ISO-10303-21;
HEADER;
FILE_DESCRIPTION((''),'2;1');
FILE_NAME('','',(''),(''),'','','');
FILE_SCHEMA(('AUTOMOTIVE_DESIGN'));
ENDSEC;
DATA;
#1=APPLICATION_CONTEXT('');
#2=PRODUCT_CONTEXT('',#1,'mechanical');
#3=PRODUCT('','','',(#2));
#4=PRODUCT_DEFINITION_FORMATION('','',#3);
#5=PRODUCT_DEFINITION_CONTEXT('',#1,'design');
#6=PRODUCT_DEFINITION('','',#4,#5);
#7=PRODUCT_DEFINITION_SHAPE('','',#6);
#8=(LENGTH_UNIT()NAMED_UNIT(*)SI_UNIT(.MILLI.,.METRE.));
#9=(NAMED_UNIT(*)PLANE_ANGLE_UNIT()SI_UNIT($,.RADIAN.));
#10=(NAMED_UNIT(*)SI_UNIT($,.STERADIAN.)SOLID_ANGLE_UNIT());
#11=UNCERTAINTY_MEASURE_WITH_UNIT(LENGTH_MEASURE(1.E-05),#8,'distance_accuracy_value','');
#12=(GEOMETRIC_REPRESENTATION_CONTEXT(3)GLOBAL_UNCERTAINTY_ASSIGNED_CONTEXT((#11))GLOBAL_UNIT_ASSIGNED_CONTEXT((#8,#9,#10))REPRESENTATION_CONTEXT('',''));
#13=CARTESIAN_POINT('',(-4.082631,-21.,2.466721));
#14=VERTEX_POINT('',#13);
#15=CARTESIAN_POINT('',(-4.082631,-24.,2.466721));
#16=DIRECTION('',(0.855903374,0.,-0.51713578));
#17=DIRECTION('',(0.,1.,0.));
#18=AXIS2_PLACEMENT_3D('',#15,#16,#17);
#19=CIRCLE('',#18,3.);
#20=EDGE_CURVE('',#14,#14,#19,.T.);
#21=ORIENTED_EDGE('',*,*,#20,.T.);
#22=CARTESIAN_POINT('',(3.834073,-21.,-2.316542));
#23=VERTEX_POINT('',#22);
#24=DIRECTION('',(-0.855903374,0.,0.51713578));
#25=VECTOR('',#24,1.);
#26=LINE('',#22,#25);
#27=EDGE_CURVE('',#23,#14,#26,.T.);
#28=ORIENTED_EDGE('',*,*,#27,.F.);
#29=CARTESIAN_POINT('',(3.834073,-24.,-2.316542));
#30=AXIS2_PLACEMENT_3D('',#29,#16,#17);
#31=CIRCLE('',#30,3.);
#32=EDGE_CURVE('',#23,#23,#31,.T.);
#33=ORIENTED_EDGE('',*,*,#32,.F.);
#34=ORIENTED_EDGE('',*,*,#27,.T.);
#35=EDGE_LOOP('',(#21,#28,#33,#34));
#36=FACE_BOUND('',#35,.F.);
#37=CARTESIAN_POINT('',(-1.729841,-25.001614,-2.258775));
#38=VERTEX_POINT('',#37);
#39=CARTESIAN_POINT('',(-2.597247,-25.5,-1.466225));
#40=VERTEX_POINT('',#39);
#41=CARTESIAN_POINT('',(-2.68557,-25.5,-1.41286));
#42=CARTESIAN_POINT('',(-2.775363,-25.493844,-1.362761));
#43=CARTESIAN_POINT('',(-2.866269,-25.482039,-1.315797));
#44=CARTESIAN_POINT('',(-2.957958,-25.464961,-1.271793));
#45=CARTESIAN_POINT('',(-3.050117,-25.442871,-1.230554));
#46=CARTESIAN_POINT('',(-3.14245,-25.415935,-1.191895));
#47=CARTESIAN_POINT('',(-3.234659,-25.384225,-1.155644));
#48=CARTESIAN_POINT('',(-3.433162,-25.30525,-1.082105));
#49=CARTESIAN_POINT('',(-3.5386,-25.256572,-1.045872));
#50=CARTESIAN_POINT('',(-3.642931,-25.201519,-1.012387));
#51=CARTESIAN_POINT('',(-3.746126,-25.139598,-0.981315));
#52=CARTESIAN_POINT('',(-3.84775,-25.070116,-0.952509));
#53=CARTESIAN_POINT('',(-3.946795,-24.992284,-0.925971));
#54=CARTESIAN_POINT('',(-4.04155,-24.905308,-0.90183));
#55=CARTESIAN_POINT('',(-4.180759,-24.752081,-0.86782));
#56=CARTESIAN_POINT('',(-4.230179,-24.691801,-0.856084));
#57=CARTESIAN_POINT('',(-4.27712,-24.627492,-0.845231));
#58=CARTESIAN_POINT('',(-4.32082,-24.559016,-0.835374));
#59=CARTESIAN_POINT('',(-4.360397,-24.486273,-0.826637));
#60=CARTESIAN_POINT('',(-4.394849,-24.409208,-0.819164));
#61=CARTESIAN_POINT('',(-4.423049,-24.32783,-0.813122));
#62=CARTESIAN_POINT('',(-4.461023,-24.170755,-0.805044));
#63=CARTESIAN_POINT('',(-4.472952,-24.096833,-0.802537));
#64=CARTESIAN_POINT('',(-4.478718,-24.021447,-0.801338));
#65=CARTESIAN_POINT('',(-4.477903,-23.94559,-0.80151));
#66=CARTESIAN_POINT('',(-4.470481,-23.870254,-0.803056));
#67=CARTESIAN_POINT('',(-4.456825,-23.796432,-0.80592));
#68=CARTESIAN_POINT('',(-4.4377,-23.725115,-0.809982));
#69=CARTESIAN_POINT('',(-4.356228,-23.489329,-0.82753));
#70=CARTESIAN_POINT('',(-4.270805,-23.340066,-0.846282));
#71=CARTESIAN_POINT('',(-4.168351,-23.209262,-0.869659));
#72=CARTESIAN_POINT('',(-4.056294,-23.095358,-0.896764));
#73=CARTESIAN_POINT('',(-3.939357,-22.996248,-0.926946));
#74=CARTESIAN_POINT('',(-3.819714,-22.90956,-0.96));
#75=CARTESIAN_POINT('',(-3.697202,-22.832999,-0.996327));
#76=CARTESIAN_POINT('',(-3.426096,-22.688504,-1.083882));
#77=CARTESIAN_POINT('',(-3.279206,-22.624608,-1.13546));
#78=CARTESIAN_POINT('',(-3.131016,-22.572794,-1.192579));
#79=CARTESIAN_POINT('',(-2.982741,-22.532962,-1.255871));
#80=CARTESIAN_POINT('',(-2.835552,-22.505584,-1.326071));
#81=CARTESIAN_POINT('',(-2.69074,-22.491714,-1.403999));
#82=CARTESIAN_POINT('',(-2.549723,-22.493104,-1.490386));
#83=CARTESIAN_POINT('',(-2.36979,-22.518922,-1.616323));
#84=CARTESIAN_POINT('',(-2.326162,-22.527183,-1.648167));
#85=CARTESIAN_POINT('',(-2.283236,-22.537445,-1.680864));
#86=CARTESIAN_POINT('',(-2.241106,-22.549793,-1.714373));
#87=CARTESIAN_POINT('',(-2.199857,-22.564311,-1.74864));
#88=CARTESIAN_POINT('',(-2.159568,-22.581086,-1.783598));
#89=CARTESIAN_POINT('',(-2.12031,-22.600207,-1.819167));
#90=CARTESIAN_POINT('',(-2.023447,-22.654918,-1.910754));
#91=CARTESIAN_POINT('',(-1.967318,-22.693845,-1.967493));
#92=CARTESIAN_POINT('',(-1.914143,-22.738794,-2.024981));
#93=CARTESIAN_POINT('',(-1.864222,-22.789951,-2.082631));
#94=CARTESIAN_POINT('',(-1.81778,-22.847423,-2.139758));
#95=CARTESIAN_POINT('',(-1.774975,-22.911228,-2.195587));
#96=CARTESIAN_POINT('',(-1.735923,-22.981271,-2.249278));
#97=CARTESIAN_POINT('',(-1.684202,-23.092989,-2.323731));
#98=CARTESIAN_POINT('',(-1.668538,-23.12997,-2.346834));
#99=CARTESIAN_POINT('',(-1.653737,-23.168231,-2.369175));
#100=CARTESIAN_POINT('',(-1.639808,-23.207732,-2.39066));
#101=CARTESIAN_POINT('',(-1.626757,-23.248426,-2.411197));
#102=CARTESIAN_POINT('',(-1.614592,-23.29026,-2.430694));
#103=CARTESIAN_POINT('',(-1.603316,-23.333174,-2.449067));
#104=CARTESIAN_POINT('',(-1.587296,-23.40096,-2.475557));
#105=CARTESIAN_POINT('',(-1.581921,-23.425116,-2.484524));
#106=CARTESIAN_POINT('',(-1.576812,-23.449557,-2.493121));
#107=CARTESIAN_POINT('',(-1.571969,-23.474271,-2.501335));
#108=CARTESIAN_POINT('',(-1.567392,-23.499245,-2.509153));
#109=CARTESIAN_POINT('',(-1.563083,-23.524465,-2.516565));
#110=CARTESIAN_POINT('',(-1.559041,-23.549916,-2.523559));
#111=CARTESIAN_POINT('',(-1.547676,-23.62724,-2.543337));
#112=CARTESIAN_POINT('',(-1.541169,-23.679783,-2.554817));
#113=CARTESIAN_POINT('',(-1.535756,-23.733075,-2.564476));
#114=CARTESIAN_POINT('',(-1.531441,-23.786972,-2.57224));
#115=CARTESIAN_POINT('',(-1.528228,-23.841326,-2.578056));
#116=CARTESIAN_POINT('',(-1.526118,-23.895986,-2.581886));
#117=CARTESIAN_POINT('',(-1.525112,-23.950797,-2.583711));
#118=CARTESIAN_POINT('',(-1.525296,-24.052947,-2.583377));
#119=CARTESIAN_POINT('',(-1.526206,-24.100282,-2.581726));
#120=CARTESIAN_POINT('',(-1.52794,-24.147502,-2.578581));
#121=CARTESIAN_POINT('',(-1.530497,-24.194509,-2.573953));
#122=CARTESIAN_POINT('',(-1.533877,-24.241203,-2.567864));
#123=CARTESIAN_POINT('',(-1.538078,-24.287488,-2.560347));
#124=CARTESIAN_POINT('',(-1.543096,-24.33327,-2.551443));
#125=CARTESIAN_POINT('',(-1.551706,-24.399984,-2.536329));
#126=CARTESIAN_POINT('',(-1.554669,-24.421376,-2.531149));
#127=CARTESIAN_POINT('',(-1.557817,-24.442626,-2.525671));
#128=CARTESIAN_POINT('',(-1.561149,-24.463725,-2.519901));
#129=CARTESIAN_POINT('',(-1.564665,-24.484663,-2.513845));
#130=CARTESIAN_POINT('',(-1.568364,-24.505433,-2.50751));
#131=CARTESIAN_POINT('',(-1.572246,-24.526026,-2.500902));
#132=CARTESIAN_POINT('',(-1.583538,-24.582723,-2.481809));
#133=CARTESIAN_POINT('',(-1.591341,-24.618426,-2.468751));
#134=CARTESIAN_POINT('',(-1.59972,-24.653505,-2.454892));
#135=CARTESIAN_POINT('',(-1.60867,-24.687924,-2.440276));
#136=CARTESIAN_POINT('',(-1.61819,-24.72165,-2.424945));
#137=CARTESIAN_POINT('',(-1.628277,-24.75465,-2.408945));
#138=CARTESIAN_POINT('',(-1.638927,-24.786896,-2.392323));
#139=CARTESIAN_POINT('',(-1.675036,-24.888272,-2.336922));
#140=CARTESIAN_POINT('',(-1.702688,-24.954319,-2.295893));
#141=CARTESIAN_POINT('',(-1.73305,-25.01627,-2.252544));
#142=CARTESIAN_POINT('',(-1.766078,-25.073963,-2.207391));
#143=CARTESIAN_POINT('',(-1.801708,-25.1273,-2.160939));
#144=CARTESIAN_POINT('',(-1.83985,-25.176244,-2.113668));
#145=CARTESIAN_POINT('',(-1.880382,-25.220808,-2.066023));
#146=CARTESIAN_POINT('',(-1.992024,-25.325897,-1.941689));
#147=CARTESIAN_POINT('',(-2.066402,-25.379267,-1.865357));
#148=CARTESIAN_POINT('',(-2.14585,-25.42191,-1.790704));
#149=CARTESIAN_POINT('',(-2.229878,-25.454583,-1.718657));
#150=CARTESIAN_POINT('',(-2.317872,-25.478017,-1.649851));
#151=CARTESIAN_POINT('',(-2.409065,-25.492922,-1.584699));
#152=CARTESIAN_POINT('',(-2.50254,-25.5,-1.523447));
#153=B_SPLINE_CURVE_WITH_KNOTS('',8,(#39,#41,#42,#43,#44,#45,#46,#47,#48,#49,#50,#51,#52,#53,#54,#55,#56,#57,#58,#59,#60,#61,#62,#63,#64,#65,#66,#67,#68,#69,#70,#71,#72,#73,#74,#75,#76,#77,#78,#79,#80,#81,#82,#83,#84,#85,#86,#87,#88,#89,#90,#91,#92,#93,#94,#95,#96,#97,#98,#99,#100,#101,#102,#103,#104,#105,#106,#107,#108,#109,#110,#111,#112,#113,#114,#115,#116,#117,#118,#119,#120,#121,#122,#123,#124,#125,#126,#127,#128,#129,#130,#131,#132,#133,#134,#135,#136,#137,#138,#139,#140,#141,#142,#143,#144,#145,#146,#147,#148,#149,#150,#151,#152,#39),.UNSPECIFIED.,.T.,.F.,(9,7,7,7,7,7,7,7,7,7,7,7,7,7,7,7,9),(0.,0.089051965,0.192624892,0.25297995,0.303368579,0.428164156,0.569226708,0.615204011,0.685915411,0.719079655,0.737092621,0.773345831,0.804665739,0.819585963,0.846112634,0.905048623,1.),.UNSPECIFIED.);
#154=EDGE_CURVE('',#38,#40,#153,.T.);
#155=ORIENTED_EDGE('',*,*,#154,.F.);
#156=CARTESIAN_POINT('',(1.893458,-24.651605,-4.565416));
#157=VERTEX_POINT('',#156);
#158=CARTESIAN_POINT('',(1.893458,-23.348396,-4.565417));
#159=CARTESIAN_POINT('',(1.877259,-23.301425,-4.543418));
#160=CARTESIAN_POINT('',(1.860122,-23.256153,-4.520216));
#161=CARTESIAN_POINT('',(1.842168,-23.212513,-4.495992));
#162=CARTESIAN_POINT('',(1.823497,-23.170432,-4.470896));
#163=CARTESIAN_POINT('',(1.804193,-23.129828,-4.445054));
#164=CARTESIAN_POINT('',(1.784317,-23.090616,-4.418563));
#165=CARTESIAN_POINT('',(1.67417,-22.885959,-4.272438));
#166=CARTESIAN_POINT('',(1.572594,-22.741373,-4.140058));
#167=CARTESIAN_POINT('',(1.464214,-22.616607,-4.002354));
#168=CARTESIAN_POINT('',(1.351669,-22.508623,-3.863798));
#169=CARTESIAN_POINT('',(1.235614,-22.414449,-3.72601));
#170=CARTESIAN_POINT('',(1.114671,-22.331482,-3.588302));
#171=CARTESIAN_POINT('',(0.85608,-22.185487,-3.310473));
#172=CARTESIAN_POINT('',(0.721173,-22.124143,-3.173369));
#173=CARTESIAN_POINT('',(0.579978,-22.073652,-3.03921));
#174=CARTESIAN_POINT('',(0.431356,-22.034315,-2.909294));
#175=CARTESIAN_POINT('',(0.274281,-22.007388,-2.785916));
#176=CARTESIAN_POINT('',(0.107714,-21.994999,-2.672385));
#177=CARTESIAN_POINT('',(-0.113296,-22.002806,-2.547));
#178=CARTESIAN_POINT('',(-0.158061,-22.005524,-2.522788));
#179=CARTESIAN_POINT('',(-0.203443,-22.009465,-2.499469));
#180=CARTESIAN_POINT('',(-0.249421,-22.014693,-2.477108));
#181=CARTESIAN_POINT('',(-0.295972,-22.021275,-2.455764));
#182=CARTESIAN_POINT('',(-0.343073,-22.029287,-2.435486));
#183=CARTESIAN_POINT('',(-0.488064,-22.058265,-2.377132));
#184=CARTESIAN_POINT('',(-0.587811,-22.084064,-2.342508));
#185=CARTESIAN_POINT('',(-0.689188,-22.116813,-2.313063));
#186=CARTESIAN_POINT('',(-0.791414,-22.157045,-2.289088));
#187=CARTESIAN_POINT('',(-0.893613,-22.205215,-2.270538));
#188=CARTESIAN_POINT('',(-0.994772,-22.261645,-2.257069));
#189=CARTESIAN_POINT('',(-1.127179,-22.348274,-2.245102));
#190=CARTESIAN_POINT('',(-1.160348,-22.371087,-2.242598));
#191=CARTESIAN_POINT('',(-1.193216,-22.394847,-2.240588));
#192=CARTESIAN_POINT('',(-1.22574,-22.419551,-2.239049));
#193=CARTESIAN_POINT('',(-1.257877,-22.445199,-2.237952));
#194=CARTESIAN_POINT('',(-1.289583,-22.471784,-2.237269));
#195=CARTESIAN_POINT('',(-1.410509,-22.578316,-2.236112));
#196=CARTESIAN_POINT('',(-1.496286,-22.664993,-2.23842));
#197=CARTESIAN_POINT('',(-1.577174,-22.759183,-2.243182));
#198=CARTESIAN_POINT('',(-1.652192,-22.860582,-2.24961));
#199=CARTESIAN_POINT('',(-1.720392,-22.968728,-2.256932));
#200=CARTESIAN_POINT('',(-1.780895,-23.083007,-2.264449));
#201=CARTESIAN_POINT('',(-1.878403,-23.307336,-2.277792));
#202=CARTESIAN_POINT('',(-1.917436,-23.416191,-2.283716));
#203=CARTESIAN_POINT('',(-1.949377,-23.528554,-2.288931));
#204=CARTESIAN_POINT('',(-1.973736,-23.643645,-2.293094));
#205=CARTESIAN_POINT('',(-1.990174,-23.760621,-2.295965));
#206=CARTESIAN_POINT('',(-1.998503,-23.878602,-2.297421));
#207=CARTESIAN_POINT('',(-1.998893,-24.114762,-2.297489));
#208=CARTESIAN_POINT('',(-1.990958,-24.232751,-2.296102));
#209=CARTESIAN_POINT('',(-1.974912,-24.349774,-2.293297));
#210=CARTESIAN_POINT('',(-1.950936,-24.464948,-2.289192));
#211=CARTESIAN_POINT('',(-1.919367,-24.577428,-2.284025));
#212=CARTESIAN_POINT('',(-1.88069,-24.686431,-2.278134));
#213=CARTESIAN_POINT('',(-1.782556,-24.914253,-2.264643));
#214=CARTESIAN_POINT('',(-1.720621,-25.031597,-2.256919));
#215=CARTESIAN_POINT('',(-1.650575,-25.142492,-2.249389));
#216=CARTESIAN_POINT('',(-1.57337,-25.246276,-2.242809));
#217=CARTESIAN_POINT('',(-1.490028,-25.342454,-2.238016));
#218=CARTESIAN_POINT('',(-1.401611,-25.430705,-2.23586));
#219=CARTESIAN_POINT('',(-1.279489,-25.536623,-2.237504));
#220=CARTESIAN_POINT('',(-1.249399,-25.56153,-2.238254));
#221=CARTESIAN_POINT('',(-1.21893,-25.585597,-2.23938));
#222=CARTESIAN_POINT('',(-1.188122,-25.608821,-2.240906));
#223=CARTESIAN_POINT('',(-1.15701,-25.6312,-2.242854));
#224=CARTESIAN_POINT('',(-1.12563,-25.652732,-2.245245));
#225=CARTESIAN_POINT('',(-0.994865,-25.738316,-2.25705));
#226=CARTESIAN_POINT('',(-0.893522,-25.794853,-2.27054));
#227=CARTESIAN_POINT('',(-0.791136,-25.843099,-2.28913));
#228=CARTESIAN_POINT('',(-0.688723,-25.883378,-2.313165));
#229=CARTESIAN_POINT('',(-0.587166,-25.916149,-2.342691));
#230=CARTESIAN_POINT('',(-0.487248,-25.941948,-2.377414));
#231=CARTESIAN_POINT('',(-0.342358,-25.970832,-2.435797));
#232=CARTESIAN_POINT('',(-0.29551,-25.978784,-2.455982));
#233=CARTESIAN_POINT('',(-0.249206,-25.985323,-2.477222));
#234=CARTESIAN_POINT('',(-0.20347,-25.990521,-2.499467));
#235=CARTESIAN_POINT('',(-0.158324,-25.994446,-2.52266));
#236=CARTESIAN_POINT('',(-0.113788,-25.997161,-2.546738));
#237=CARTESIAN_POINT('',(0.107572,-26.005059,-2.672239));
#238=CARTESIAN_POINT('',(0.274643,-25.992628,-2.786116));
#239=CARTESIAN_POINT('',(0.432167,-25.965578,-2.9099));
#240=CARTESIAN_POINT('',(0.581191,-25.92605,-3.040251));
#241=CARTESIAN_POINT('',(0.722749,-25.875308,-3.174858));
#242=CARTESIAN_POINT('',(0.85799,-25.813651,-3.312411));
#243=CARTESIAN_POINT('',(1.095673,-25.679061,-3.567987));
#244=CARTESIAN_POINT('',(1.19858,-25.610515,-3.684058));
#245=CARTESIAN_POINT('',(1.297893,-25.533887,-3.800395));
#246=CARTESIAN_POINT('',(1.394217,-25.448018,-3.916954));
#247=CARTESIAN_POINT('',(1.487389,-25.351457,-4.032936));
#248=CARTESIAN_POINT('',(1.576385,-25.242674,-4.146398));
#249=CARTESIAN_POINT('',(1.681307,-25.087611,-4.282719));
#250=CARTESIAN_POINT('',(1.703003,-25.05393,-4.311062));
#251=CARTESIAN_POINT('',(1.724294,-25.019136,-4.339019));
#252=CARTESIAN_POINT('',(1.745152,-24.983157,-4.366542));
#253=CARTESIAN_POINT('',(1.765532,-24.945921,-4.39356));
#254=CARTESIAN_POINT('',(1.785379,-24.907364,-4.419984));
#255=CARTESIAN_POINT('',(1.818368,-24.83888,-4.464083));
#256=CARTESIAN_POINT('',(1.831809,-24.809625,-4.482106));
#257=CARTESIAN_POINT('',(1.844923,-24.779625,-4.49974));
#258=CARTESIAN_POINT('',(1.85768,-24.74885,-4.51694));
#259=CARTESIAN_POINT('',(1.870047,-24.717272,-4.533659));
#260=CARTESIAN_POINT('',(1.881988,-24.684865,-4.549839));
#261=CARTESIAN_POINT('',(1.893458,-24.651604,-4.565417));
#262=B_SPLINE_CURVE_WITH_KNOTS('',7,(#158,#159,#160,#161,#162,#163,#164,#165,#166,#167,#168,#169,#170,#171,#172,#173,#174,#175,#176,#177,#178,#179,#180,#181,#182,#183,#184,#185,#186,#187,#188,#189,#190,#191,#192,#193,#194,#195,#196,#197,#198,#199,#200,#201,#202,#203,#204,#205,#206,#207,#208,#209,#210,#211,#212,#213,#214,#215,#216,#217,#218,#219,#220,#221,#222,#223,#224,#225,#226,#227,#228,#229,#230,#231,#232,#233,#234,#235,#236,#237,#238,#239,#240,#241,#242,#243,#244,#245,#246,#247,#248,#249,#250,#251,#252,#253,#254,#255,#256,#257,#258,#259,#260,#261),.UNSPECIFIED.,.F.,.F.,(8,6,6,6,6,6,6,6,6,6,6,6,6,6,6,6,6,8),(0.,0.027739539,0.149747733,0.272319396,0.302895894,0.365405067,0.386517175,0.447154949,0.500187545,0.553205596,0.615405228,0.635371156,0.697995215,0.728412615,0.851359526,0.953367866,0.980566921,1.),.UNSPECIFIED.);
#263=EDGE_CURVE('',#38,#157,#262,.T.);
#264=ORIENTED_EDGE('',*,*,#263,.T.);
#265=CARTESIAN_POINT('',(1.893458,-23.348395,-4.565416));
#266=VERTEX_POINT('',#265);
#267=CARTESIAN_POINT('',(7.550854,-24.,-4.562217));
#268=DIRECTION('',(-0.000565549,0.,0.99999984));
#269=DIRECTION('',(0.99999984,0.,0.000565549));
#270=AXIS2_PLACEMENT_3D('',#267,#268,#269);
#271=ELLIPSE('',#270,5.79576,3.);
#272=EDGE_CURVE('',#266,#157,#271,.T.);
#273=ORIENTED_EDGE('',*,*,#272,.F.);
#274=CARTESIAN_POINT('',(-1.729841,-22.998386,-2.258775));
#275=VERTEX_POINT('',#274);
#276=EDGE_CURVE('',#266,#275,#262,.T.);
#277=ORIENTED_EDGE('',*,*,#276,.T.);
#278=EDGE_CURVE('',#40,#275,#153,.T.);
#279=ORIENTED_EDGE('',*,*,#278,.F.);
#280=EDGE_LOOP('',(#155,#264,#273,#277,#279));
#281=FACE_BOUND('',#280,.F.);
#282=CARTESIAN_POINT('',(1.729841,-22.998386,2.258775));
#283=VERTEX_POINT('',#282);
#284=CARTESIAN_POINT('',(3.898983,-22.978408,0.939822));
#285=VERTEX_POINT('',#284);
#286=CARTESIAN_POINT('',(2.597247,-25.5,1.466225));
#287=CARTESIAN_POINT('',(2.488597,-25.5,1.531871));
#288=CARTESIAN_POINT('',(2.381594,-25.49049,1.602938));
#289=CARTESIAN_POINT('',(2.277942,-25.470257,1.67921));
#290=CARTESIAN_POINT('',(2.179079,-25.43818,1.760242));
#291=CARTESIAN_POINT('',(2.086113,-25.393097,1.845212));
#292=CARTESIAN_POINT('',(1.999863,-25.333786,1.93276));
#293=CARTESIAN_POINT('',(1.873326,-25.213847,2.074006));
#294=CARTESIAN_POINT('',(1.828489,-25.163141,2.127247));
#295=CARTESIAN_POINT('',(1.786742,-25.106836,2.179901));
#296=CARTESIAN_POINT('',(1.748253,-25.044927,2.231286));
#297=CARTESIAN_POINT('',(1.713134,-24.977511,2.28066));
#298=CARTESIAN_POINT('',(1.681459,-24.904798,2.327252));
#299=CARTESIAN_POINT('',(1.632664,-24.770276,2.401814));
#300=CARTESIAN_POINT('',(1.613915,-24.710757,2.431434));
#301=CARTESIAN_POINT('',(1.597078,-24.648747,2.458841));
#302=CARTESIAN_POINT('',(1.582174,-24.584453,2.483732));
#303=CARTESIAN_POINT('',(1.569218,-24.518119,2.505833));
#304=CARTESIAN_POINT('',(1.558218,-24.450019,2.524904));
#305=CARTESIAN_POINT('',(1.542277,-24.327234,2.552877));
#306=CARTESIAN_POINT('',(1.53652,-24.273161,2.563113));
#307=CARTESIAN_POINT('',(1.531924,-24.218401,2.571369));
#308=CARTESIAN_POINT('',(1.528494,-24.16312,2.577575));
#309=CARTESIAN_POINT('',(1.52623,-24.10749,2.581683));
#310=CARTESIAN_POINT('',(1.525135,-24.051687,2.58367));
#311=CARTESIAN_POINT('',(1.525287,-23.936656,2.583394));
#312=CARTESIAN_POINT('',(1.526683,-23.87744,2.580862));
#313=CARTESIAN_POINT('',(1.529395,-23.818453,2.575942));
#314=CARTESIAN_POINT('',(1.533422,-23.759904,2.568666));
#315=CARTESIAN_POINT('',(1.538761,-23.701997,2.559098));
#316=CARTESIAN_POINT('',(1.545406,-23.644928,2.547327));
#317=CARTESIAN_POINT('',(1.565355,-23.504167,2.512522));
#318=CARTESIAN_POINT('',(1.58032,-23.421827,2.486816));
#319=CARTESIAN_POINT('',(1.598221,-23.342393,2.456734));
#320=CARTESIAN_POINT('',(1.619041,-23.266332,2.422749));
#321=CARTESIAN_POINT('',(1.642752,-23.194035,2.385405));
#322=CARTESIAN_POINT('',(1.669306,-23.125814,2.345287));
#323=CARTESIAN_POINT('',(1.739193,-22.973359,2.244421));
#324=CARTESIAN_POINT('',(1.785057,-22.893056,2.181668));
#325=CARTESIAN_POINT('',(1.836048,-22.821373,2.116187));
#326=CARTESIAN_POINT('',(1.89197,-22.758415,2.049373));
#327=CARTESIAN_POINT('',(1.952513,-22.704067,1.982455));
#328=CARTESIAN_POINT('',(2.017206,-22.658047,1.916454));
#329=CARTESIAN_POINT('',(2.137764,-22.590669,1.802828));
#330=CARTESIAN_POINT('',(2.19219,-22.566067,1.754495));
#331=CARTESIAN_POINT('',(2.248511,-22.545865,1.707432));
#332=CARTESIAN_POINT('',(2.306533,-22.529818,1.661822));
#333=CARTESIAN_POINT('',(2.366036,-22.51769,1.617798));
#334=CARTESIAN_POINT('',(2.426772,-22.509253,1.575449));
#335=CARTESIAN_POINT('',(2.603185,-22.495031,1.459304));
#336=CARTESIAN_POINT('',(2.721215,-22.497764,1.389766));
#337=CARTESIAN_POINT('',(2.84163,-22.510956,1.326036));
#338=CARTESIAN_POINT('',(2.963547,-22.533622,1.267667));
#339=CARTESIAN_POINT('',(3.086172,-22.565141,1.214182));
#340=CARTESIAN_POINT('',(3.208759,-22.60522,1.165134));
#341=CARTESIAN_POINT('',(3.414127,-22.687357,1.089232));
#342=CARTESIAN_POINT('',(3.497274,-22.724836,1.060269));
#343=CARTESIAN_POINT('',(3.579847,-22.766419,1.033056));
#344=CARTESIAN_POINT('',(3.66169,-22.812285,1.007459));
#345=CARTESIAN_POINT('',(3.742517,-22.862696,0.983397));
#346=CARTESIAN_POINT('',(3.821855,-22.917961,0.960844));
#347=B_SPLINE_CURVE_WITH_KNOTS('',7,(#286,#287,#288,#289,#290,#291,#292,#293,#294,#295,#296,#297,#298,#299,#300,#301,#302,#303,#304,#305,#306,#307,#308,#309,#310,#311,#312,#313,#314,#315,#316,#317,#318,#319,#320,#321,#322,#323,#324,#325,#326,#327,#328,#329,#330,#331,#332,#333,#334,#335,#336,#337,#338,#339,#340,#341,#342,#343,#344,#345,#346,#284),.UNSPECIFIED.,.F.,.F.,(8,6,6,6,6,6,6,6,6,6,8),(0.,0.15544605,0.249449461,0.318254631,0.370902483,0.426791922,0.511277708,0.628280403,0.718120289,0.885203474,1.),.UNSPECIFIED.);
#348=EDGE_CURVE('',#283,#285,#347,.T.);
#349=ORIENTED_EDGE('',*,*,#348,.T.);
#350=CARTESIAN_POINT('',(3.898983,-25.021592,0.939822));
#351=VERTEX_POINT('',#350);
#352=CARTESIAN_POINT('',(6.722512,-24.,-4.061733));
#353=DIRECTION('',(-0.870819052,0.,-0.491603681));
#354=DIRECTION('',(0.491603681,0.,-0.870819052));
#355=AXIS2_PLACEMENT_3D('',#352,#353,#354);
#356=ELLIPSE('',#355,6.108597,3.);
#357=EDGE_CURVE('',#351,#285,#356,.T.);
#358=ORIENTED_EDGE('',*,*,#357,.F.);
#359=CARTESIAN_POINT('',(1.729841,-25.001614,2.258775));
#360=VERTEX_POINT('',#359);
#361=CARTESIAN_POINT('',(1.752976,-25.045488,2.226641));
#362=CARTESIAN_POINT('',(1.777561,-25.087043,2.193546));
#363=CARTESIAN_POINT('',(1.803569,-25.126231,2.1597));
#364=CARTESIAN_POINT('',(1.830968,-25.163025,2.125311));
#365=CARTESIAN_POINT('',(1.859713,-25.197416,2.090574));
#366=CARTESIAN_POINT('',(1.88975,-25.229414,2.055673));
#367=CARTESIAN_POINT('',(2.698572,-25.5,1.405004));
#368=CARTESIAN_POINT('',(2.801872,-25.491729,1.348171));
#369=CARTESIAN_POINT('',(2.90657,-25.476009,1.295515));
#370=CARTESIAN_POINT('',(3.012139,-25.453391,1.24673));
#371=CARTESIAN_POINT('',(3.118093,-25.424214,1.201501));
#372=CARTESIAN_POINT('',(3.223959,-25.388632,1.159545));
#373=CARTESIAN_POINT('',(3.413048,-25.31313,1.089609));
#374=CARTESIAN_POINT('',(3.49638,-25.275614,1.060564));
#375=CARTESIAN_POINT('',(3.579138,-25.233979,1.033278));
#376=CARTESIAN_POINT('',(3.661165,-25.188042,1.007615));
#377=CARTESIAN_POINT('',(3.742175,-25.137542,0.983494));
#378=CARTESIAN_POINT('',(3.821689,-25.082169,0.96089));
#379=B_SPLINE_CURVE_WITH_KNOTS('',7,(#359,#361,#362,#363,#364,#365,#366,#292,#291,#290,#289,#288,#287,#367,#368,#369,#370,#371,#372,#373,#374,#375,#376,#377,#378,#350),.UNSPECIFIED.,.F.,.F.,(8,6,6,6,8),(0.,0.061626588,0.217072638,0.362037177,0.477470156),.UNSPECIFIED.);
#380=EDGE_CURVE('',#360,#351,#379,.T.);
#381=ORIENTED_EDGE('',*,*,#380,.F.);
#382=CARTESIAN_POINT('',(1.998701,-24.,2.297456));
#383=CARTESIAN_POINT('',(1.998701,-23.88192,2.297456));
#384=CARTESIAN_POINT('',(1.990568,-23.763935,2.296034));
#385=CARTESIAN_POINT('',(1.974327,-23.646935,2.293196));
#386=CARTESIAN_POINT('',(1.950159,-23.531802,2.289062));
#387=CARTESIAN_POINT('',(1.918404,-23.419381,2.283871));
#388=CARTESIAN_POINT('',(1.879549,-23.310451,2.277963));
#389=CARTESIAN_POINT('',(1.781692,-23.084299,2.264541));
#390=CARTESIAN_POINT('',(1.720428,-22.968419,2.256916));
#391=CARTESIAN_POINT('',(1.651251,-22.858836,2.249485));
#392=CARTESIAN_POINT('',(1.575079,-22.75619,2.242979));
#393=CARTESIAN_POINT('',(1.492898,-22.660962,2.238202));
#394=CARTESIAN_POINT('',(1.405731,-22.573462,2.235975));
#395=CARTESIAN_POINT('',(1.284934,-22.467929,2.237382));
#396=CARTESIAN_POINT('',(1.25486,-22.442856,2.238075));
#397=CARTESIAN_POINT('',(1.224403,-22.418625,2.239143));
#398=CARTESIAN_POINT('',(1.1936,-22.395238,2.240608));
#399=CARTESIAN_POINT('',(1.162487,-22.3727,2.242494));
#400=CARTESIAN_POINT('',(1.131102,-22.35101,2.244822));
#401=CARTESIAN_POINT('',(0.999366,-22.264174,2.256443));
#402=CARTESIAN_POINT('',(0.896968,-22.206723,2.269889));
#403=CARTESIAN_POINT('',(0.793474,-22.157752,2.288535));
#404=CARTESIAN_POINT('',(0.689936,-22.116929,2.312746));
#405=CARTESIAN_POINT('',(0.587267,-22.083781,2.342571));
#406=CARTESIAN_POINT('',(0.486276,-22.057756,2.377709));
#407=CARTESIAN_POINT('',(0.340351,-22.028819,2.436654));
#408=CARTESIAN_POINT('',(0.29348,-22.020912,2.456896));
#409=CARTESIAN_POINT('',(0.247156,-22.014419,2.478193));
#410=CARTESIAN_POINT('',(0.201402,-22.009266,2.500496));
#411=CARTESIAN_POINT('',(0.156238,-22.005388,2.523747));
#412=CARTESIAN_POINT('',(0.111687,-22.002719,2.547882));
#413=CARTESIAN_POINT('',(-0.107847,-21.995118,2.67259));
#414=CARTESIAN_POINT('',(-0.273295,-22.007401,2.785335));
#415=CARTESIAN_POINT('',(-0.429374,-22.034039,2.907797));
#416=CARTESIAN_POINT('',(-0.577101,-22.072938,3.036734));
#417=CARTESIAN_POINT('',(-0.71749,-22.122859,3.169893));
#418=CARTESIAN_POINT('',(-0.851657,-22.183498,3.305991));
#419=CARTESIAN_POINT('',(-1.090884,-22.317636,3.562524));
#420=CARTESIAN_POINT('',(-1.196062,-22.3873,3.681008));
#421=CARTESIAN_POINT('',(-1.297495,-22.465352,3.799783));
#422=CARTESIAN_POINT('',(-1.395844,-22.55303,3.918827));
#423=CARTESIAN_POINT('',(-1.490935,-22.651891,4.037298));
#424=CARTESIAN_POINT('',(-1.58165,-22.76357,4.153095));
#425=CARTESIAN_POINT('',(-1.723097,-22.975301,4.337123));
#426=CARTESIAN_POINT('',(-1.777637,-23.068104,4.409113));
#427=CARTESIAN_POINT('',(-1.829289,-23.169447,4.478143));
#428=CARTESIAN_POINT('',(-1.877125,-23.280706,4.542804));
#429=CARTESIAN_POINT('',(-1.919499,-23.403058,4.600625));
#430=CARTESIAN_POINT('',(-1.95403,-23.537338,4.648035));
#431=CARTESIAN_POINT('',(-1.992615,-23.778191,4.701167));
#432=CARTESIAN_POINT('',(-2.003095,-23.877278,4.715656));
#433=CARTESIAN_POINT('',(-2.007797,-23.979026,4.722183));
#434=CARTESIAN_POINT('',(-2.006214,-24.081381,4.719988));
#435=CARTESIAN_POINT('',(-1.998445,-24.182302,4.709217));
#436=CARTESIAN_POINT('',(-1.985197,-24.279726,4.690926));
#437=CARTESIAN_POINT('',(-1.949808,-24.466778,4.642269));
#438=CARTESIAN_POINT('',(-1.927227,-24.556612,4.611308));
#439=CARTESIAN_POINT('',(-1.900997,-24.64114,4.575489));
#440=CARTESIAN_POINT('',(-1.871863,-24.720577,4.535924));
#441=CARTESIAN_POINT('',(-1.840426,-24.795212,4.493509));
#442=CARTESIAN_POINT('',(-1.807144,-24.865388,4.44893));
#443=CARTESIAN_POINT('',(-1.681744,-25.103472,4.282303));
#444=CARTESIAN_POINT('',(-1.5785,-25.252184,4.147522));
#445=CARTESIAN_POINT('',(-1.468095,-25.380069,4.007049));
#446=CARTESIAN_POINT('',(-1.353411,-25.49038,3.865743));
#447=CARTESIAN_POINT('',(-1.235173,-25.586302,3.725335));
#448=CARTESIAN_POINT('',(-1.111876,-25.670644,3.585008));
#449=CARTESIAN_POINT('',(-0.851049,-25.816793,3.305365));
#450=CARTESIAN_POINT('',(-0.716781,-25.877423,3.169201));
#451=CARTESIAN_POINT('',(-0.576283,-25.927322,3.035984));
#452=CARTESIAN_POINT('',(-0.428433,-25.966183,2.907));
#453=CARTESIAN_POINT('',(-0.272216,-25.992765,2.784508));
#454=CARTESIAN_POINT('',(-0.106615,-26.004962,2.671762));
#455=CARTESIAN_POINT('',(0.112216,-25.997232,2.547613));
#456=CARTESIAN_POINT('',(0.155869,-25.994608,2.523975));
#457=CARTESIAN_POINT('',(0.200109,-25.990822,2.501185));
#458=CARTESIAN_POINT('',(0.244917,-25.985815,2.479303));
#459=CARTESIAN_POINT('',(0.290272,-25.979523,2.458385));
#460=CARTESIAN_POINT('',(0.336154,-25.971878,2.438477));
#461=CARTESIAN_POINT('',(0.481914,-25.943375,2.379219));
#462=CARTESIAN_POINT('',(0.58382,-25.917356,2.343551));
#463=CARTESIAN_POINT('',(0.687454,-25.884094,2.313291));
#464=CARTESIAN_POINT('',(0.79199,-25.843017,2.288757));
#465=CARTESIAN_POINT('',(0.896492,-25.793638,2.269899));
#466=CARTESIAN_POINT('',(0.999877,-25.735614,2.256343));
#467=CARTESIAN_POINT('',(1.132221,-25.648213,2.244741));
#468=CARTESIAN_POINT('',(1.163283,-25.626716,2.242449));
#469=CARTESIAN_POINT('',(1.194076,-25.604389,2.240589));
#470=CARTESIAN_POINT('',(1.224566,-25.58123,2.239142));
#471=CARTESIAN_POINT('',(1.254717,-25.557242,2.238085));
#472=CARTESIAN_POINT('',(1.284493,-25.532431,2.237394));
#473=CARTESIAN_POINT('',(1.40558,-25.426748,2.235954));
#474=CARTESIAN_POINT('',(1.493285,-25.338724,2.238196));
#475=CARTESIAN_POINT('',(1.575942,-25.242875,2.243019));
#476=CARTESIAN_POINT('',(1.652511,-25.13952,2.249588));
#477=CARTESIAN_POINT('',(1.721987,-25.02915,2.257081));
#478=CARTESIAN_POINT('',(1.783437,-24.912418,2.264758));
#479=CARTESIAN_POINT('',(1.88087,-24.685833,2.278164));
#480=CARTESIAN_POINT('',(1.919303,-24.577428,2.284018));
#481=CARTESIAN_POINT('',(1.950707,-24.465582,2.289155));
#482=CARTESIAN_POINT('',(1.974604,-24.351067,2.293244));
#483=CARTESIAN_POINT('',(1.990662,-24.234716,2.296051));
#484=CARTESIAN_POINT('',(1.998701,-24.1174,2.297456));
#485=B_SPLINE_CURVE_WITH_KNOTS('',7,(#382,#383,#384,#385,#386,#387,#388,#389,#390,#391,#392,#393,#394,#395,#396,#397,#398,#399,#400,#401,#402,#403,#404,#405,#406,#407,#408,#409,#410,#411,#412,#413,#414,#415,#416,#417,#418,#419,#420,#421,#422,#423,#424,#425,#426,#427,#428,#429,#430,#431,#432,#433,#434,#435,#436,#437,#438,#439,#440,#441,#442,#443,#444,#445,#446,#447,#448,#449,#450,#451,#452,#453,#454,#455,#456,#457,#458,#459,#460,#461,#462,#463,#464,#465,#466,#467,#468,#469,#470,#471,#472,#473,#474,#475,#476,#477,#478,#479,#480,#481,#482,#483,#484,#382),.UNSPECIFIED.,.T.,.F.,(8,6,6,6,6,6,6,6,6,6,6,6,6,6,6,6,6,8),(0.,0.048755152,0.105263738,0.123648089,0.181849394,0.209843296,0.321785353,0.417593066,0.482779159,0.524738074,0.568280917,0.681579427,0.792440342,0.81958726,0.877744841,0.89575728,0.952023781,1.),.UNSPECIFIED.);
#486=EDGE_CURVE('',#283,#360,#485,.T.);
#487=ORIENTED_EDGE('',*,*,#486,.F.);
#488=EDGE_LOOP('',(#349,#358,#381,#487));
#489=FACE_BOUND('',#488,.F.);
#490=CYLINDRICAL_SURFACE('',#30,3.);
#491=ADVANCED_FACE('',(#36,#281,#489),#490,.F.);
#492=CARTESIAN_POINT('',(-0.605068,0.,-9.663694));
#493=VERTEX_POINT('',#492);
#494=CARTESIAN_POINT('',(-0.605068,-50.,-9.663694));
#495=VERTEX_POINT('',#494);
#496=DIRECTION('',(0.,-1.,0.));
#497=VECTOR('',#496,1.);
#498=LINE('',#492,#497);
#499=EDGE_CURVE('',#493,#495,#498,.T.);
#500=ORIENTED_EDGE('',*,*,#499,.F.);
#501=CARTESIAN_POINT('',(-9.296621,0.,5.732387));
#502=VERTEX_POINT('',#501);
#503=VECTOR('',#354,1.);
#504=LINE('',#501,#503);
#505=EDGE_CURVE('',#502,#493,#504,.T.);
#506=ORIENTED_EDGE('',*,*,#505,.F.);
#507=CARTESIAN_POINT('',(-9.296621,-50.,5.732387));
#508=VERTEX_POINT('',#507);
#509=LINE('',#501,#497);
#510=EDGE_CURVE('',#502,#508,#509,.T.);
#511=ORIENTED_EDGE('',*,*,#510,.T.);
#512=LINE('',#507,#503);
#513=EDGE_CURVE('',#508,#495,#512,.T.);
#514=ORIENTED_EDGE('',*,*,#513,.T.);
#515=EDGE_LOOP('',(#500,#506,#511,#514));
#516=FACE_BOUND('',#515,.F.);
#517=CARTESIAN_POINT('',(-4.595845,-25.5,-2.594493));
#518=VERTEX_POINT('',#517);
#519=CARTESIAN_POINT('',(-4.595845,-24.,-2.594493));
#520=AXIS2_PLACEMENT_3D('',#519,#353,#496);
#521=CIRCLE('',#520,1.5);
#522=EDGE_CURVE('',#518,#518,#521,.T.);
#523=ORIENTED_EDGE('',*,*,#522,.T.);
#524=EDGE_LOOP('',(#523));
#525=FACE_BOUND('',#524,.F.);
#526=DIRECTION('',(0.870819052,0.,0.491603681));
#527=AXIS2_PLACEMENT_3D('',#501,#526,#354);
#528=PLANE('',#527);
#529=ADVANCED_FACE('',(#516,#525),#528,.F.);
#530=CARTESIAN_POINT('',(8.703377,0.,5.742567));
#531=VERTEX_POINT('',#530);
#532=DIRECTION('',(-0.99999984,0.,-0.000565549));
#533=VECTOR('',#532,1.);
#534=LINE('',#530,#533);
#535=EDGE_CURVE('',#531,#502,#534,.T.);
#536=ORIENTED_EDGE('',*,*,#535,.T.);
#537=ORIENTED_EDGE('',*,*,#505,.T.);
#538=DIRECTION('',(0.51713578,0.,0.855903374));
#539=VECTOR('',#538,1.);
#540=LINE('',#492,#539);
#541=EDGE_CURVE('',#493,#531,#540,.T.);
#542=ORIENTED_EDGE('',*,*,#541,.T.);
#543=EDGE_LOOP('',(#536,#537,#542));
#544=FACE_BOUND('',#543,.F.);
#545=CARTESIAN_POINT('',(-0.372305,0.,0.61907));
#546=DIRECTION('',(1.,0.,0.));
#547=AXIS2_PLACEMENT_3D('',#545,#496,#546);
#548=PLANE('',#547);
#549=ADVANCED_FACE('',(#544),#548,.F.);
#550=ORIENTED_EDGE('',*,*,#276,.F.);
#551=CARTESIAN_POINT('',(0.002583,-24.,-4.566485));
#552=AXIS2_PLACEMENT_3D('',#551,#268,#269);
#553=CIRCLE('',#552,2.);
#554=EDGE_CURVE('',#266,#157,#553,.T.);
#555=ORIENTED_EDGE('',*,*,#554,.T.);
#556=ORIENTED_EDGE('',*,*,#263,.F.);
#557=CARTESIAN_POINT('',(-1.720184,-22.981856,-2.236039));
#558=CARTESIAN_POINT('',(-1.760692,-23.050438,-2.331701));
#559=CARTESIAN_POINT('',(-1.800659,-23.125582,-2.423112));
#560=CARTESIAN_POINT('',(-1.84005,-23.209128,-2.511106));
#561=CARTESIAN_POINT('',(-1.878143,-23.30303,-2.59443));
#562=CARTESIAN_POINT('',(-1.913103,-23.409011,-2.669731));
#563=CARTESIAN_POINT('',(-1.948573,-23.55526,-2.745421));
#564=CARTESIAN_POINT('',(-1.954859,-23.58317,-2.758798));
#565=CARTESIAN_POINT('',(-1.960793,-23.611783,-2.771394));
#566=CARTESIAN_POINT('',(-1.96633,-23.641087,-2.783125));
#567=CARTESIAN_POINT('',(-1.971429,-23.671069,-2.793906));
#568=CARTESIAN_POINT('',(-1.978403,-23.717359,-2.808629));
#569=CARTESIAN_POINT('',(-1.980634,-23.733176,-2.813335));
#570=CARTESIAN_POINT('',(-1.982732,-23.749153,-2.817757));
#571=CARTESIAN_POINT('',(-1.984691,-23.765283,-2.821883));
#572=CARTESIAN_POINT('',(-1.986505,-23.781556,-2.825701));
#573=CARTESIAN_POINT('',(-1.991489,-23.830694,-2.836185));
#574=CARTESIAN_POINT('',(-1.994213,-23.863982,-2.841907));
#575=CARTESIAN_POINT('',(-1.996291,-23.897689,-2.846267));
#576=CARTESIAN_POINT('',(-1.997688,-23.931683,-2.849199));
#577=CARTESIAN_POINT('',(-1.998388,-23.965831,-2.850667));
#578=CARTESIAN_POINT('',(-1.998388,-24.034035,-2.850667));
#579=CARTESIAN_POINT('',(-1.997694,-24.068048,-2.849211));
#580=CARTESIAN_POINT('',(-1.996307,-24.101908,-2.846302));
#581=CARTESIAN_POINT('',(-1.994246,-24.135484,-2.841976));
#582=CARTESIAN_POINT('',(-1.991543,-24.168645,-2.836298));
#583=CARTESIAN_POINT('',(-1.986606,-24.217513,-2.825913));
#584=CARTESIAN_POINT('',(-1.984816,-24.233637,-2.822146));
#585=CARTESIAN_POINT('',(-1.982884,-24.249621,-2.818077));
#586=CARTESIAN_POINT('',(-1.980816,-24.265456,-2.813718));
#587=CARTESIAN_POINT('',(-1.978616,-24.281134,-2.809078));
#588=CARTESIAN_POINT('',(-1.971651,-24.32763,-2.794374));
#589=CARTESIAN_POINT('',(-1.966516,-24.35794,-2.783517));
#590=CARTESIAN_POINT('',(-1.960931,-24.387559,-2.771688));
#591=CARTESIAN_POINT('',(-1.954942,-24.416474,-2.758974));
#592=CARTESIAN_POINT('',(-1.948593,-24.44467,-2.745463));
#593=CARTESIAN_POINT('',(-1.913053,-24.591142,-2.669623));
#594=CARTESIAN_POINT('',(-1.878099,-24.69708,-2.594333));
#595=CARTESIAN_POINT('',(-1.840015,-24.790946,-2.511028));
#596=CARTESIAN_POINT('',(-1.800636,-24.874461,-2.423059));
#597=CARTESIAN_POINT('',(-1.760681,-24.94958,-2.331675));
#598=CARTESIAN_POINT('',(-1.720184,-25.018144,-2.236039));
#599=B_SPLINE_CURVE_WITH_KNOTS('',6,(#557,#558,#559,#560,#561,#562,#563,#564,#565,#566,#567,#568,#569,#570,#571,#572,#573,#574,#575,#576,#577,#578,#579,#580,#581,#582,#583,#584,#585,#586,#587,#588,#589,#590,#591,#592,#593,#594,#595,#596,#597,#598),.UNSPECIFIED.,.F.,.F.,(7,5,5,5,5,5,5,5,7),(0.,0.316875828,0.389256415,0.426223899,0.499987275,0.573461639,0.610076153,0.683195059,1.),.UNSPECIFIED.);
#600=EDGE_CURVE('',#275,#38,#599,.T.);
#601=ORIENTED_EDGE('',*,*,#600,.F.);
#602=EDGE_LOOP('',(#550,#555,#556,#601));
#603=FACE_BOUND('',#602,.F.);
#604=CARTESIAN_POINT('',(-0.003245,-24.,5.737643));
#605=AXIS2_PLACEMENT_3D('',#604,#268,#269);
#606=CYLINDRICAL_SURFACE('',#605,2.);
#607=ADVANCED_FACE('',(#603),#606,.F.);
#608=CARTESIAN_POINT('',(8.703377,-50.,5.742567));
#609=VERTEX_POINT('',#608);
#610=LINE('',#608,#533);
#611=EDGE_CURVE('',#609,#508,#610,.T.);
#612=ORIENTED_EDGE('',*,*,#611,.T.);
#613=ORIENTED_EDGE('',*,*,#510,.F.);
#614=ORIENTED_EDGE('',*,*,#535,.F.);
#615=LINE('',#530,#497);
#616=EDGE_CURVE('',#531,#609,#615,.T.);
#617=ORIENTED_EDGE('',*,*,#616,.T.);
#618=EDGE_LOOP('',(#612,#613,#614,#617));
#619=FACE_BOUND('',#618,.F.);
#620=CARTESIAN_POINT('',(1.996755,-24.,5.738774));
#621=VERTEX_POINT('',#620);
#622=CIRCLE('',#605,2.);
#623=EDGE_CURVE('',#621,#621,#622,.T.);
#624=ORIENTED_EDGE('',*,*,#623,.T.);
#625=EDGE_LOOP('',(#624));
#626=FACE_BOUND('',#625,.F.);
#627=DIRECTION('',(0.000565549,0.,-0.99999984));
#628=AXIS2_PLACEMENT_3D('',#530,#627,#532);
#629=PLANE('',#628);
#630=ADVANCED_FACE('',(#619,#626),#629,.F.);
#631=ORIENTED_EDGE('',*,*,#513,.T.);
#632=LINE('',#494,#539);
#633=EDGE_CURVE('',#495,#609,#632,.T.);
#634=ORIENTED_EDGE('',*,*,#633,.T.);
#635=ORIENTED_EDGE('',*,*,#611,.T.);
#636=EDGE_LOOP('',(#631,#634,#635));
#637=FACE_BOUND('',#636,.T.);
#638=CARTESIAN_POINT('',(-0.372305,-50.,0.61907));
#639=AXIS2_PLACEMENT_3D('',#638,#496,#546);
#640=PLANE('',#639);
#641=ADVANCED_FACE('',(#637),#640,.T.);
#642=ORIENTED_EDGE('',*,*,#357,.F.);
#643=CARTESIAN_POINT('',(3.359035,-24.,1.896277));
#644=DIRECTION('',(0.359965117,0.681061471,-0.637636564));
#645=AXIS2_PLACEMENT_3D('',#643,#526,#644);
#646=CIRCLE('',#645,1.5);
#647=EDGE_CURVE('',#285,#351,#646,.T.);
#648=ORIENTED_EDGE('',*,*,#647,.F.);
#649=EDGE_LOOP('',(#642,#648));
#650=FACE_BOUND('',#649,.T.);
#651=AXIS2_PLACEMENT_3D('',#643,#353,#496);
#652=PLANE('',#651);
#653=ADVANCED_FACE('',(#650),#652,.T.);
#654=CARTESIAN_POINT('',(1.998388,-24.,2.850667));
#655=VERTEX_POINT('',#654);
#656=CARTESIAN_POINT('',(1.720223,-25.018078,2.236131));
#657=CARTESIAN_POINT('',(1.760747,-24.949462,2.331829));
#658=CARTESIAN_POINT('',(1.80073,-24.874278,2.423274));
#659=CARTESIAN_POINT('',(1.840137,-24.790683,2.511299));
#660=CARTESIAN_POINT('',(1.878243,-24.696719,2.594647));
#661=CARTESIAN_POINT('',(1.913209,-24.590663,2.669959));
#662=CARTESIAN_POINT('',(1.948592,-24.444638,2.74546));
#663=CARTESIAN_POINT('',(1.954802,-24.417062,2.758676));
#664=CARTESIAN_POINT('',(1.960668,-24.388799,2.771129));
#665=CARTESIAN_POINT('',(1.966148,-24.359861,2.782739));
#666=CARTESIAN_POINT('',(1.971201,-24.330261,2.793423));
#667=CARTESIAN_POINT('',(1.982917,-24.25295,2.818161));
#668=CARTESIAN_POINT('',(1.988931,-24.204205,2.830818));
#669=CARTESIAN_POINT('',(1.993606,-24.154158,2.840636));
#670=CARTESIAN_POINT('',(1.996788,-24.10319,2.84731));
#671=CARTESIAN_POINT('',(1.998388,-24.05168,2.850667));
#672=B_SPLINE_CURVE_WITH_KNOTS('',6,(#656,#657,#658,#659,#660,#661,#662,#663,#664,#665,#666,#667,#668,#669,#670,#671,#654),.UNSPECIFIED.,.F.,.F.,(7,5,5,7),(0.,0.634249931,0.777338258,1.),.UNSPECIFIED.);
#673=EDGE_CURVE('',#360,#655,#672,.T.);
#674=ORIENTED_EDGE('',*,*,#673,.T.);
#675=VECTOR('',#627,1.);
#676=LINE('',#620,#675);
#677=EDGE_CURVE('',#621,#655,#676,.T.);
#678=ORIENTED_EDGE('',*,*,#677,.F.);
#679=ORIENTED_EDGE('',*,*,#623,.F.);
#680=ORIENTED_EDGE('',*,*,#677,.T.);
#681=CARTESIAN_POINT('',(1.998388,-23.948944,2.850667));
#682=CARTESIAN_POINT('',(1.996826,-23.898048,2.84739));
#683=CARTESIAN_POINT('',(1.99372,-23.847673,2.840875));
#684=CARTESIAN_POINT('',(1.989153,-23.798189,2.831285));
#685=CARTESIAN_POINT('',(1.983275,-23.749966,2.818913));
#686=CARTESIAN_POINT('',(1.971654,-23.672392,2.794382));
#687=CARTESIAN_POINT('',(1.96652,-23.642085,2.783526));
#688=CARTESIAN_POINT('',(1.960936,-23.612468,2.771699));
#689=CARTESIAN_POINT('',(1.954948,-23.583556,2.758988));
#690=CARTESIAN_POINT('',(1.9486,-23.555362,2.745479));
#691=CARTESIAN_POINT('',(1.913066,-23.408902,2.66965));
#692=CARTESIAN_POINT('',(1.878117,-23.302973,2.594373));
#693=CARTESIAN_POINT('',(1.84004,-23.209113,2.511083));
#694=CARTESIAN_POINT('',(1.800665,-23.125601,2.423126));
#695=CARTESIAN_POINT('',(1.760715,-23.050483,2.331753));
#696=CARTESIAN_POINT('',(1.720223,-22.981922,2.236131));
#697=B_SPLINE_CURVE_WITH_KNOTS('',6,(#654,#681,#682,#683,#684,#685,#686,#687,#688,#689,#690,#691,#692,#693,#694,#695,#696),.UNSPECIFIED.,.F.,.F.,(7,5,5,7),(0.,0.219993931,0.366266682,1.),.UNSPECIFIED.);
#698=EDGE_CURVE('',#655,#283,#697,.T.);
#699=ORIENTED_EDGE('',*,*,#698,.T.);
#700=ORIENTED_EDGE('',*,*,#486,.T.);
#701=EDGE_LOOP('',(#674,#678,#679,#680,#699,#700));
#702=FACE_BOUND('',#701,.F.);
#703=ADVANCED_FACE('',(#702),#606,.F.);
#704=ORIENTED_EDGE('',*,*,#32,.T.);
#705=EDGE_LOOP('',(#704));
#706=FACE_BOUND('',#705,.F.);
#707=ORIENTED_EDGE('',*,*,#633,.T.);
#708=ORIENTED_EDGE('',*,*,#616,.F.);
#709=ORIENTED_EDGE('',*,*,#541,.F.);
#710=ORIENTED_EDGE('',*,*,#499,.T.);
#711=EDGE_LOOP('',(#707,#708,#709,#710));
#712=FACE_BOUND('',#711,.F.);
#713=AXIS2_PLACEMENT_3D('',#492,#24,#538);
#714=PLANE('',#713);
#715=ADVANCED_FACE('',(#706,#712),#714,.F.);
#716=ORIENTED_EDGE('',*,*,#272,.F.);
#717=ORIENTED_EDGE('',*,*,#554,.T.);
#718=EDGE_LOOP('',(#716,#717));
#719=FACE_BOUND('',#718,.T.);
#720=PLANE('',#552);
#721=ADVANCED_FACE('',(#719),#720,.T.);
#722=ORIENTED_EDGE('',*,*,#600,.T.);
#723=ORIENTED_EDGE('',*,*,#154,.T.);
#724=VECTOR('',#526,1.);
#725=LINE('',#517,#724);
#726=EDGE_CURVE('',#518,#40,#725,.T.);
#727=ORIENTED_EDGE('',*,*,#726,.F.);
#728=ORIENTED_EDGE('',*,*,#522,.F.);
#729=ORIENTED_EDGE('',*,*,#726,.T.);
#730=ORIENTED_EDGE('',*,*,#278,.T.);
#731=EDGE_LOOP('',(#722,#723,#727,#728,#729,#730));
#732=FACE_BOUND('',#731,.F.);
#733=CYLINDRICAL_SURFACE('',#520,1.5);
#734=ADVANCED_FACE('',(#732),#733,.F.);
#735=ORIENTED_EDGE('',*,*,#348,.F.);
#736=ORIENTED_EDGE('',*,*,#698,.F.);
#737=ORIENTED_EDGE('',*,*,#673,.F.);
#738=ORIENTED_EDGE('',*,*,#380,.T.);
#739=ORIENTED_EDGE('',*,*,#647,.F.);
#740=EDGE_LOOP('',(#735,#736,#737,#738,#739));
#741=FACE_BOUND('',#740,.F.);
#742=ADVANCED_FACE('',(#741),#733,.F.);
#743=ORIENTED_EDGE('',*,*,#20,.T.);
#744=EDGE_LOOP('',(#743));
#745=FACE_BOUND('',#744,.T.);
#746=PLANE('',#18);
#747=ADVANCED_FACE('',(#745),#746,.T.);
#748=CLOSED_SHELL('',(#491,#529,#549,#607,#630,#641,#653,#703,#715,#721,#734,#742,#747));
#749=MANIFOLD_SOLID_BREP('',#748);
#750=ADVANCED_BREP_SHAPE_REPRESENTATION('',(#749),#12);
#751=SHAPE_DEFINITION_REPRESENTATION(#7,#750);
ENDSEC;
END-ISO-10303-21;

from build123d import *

# Parameters (mm, degrees)
F1_DEPTH = 50
F2_R     = 3
F5_DEPTH = 9.24953
F3_R     = 2
F6_DEPTH = 10.30413
F4_R     = 1.5
F7_DEPTH = 9.13494


with BuildPart() as f1:
    # F0 (on Front) → F1 (new body)
    with BuildSketch(Plane.XZ):
        Polygon((-9.2966205801, 5.7323870165), (-0.6050675001, -9.6636938179), (8.7033765413, 5.7425669072), align=None)
    extrude(amount=F1_DEPTH)

    # F2 (on face) → F5 (cut)
    with BuildSketch(Plane(origin=(3.8340726786, 0, -2.3165420615), x_dir=(0, 1, 0), z_dir=(0.8559033736, 0, -0.5171357801))):
        with Locations((-24, 0)):
            Circle(F2_R)
    extrude(amount=-F5_DEPTH, mode=Mode.SUBTRACT)

    # F3 (on face) → F6 (cut)
    with BuildSketch(Plane(origin=(-0.0032449215, 0, 5.7376428811), x_dir=(0.9999998401, 0, 0.0005655495), z_dir=(-0.0005655495, 0, 0.9999998401))):
        with Locations((0, -24)):
            Circle(F3_R)
    extrude(amount=-F6_DEPTH, mode=Mode.SUBTRACT)

    # F4 (on face) → F7 (cut)
    with BuildSketch(Plane(origin=(-4.5958448678, 0, -2.5944933678), x_dir=(0, -1, 0), z_dir=(-0.8708190517, 0, -0.491603681))):
        with Locations((24, 0)):
            Circle(F4_R)
    extrude(amount=-F7_DEPTH, mode=Mode.SUBTRACT)


solid = f1.part
